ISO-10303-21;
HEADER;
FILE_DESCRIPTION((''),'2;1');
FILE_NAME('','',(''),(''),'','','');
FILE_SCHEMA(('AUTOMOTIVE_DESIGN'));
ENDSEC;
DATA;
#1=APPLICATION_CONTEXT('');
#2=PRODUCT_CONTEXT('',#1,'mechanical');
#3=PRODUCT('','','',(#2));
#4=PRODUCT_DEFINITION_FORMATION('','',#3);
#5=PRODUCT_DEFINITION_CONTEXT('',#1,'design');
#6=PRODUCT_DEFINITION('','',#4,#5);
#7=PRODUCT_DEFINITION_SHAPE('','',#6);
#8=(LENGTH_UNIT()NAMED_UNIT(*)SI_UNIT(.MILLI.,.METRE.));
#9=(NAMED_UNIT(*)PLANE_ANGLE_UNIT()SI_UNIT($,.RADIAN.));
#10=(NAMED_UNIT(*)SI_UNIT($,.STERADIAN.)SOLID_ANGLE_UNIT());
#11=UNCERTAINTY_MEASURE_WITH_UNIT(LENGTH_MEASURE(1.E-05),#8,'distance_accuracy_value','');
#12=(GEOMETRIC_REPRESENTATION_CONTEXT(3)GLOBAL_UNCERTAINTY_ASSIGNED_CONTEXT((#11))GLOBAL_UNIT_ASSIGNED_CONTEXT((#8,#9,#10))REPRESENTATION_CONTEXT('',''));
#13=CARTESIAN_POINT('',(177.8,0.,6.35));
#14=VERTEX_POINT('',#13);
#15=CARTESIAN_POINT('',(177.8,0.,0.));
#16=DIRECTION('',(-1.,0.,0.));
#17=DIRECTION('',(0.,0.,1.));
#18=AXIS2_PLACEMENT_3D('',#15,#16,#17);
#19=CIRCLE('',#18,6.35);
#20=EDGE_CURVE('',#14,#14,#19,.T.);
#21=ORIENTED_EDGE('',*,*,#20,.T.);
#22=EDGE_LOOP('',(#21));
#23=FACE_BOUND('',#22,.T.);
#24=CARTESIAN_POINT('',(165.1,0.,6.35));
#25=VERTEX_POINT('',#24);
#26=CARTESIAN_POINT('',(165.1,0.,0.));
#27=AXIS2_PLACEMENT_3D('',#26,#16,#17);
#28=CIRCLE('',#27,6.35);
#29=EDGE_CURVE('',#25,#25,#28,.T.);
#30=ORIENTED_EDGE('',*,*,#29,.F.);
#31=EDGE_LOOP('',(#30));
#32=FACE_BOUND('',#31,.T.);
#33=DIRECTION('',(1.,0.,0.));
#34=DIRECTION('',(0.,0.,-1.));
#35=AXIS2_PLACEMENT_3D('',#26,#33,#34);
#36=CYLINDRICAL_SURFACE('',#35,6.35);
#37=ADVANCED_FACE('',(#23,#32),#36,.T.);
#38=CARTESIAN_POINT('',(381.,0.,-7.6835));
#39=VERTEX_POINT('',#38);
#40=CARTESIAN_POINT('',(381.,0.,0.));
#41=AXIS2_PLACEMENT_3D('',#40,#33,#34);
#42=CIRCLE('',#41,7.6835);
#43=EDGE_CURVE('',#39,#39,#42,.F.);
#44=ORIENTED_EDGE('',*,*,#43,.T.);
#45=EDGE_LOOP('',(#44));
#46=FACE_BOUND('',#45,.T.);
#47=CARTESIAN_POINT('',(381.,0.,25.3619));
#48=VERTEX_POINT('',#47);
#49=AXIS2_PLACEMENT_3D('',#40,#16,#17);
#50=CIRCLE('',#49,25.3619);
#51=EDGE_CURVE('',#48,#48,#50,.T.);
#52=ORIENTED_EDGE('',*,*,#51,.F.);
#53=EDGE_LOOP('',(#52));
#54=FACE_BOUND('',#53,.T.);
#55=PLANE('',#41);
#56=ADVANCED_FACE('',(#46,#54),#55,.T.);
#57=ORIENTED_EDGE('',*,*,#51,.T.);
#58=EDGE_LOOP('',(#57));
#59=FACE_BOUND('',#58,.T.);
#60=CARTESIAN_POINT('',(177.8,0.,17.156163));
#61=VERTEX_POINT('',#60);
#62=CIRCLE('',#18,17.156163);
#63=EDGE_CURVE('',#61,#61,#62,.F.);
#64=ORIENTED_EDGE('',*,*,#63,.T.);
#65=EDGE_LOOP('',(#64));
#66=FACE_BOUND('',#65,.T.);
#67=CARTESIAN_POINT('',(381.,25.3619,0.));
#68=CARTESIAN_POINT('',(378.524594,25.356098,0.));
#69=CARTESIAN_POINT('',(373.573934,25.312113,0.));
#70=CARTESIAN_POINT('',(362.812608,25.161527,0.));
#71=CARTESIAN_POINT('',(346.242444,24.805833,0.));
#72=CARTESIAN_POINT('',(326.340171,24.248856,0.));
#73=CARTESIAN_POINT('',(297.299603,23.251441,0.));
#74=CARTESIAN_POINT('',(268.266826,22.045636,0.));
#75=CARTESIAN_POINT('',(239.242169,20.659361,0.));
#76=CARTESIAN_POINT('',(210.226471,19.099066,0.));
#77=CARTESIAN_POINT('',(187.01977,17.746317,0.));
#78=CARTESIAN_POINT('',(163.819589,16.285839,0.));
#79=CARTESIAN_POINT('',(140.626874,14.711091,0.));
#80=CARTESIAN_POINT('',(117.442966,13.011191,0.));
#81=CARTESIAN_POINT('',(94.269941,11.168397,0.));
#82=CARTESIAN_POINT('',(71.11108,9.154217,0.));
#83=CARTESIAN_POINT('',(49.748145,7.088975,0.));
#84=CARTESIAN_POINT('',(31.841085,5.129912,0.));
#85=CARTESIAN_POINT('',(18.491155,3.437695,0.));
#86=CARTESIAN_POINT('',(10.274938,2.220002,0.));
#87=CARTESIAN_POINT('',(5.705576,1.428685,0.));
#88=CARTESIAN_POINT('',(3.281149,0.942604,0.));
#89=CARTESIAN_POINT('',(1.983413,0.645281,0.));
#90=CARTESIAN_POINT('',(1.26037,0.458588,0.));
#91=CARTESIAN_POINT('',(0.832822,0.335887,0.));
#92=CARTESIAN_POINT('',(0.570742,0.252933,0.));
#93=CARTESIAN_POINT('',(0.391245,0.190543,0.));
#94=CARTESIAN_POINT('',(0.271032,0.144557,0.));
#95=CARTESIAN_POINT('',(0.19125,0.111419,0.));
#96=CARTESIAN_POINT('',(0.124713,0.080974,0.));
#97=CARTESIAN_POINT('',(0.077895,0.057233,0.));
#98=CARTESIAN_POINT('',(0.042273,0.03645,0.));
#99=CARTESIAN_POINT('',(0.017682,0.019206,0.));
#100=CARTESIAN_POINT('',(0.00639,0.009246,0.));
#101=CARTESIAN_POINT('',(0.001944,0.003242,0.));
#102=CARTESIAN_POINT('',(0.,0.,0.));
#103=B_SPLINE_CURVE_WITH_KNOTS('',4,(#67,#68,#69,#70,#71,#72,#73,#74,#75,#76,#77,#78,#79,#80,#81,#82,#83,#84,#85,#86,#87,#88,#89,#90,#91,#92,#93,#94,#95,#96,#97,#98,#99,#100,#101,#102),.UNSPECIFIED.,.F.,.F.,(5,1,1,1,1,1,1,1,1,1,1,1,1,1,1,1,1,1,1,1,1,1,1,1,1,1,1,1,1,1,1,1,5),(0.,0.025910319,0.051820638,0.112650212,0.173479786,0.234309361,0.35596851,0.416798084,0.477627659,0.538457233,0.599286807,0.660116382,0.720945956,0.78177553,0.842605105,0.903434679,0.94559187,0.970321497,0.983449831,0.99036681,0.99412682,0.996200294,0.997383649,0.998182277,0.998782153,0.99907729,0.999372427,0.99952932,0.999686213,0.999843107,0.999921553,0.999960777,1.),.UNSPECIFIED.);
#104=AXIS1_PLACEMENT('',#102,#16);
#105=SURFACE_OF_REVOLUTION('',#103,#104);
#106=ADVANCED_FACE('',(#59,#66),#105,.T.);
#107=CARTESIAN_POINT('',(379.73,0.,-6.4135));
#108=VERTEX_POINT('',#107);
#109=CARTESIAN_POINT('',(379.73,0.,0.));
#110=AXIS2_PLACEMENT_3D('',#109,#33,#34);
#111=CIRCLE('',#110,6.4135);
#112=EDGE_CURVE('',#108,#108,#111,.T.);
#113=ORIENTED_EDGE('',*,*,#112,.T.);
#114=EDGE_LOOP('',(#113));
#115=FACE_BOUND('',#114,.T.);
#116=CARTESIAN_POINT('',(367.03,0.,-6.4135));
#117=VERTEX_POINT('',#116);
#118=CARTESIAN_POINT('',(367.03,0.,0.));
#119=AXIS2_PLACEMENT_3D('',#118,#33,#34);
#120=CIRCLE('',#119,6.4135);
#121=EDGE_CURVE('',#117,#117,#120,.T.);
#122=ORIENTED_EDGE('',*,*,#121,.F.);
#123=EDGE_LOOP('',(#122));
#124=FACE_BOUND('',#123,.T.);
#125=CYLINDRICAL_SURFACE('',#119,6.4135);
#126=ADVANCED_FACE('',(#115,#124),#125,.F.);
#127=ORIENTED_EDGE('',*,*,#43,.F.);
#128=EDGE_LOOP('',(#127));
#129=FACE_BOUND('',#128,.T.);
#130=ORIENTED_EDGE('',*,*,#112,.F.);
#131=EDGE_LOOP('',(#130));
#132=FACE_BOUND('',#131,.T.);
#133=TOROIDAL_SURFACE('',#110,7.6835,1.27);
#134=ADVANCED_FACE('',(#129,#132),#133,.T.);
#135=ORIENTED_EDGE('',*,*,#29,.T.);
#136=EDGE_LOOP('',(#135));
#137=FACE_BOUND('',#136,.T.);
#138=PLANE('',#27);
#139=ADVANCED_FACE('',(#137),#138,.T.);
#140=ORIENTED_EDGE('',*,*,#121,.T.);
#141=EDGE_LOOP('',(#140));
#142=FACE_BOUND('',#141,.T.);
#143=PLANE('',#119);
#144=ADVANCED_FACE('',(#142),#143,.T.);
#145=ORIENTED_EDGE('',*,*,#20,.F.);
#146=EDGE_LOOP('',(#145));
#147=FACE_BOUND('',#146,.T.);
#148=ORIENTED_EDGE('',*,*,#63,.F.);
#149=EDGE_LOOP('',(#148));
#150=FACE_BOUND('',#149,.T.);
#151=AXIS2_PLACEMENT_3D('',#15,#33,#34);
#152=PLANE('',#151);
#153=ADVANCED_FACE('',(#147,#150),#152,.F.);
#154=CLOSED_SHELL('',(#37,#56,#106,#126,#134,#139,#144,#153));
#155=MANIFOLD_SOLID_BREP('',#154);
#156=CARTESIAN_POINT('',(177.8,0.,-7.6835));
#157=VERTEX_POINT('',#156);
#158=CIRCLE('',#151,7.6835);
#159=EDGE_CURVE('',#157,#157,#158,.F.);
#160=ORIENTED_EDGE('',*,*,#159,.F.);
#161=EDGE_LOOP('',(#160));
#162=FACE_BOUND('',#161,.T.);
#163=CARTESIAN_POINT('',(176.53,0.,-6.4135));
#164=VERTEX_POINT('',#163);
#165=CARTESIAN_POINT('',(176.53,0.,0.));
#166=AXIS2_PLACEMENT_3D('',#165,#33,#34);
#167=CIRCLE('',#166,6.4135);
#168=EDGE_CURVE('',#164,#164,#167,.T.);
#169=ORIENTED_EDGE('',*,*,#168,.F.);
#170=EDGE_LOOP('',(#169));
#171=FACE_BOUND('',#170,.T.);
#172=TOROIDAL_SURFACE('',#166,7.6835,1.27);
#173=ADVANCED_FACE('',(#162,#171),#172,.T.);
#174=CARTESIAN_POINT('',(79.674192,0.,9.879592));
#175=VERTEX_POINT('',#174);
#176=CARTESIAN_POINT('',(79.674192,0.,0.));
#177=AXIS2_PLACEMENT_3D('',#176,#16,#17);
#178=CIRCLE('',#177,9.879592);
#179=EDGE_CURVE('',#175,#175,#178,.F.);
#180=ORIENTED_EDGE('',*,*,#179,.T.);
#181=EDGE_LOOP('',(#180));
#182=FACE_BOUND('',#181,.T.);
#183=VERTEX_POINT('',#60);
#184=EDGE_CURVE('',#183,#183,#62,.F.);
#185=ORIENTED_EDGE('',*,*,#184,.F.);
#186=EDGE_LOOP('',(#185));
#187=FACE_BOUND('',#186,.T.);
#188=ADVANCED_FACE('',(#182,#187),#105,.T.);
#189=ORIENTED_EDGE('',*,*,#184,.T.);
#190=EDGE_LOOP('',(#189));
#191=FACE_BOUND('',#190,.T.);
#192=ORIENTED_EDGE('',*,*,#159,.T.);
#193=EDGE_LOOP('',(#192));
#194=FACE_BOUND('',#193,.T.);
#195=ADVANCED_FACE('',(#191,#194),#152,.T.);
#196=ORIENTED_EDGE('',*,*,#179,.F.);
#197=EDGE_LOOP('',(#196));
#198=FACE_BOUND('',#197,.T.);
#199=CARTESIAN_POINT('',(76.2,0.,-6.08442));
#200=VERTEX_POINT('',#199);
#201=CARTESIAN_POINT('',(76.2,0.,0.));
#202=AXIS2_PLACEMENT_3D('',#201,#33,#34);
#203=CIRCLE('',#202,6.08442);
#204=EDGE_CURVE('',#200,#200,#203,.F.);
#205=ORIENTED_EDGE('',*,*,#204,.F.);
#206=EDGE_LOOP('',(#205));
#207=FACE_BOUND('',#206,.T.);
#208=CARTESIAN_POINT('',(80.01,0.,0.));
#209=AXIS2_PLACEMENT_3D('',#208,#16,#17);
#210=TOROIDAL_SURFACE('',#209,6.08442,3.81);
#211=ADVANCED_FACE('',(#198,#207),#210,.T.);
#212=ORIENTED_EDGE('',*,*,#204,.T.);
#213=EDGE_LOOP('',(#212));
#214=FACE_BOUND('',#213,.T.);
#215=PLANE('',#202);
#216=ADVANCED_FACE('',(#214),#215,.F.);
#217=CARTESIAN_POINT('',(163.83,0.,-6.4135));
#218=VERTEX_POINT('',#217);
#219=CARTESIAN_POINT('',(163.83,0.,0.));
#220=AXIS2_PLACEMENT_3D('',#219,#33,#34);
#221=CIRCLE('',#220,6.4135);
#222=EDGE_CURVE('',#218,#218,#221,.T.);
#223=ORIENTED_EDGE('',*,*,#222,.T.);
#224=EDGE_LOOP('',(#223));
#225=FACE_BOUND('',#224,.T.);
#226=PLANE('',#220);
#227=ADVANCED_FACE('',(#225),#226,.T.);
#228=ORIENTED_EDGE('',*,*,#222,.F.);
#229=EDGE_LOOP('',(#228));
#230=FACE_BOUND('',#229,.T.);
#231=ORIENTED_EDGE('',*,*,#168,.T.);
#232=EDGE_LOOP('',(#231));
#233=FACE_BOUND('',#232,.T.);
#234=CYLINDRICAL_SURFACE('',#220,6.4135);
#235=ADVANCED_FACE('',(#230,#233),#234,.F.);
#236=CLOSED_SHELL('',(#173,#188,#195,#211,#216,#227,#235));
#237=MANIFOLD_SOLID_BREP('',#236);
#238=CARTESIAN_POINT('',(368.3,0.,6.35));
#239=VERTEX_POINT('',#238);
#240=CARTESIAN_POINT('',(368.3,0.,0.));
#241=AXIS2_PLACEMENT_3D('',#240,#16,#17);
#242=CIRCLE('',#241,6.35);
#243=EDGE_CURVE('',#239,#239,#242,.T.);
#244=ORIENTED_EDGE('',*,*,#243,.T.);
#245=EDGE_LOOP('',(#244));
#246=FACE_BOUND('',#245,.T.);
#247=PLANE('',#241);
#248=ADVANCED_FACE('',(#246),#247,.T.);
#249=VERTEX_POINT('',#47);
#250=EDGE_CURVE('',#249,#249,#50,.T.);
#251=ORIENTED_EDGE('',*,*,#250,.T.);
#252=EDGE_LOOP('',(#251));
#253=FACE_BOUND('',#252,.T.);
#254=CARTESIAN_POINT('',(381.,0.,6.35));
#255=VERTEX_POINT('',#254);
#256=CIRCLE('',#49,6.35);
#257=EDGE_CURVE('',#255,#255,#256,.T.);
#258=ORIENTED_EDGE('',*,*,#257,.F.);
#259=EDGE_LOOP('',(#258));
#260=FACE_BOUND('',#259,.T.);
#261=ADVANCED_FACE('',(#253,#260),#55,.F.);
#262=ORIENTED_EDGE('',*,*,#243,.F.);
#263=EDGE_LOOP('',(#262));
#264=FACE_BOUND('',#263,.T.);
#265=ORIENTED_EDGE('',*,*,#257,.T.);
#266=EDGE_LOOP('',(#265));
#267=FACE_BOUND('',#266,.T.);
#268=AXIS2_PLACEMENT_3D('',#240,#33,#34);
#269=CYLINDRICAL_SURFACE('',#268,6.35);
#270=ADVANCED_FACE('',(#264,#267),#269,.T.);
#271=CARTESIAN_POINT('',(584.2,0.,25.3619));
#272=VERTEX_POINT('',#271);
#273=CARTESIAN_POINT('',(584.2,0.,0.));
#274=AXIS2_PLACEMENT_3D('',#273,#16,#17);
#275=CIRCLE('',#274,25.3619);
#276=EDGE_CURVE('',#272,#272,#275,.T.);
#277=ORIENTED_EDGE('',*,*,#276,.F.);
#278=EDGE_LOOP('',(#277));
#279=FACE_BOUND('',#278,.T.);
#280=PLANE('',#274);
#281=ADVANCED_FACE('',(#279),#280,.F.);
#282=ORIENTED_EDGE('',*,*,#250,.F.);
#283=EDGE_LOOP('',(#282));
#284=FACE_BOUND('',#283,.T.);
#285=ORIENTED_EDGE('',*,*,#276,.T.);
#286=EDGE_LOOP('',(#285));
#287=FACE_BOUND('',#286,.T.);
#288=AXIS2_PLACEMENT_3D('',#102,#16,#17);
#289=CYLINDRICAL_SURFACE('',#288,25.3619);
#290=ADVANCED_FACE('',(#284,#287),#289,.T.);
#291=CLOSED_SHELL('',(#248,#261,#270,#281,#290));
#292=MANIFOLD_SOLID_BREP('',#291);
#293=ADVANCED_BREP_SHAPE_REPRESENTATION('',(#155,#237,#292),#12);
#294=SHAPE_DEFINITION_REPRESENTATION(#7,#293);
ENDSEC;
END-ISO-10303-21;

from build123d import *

# Parameters (mm, degrees)
FILLET1_R           = 3.81
SPLIT2_START        = 76.2
SPLIT2_2_OUTLINE_W  = 54
SPLIT2_2_OUTLINE_H  = 54
SPLIT2_2_DEPTH      = 304.8
SKETCH2_R           = 6.35
BOSS_EXTRUDE1_DEPTH = 12.7
SKETCH3_R           = 6.4135
CUT_EXTRUDE1_DEPTH  = 13.97
FILLET2_R           = 1.27
SKETCH4_R           = 6.35
BOSS_EXTRUDE2_DEPTH = 12.7
SKETCH5_R           = 6.4135
CUT_EXTRUDE2_DEPTH  = 13.97
FILLET3_R           = 1.27


# Read off the part's stored shape, not the designer's step: Split2
with BuildPart() as part:
    # Sketch1 → Revolve1 (revolve)
    with BuildSketch(Plane.XY, mode=Mode.PRIVATE) as revolve1_sk:
        with BuildLine():
            Line((381, 25.3619), (584.2, 25.3619))
            Line((584.2, 25.3619), (584.2, 0))
            Line((584.2, 0), (0, 0))
            add(Edge.make_bspline(
                [(0, 0), (0.001943702, 0.003241862), (0.006389673, 0.009245617), (0.017681717, 0.019205878), (0.042272918, 0.036450053), (0.077894833, 0.057232573), (0.124712659, 0.080973851), (0.191250301, 0.111419343), (0.271031854, 0.144556968), (0.391244533, 0.190542862), (0.570742032, 0.252932933), (0.832821896, 0.335886963), (1.260370277, 0.458588114), (1.983412651, 0.645281043), (3.281149014, 0.942604321), (5.70557572, 1.428684819), (10.274937833, 2.220001642), (18.491155359, 3.437695386), (31.841085113, 5.129912275), (49.748145394, 7.088974906), (71.111079528, 9.154217125), (94.269940572, 11.168396588), (117.44296568, 13.011191187), (140.626874096, 14.711091291), (163.819588974, 16.285839147), (187.019770429, 17.746317083), (210.226471113, 19.099066483), (239.242169499, 20.659360719), (268.266826454, 22.045635859), (297.299602619, 23.251440617), (326.340171249, 24.24885616), (346.242443602, 24.805833209), (362.812607625, 25.161527082), (373.573934486, 25.312112889), (378.524593559, 25.356098005), (381, 25.3619)],
                knots=[0, 0, 0, 0, 0, 3.9223e-05, 7.8447e-05, 0.000156893, 0.000313787, 0.00047068, 0.000627573, 0.00092271, 0.001217847, 0.001817723, 0.002616351, 0.003799706, 0.00587318, 0.00963319, 0.016550169, 0.029678503, 0.05440813, 0.096565321, 0.157394895, 0.21822447, 0.279054044, 0.339883618, 0.400713193, 0.461542767, 0.522372341, 0.583201916, 0.64403149, 0.765690639, 0.826520214, 0.887349788, 0.948179362, 0.974089681, 1, 1, 1, 1, 1], degree=4))
        make_face()
    revolve(revolve1_sk.sketch.rotate(Axis((0, 0, 0), (1, 0, 0)), 90), axis=Axis((0, 0, 0), (1, 0, 0)))

    # Split1
    split(bisect_by=Plane(origin=(76.2, 0, 0), x_dir=(0, 0, 1), z_dir=(1, 0, 0)), keep=Keep.TOP)

    # Fillet1
    fillet1_edges = [part.edges().sort_by_distance(p)[0] for p in [
        (76.2, -1e-09, -9.569835462),
    ]]
    fillet(fillet1_edges, radius=FILLET1_R)

    # Split2 2 outline → Split2 2 (cut)
    with BuildSketch(Plane.YZ.offset(SPLIT2_START)):
        Rectangle(SPLIT2_2_OUTLINE_W, SPLIT2_2_OUTLINE_H)
    extrude(amount=SPLIT2_2_DEPTH, mode=Mode.SUBTRACT)

    # Sketch2 → Boss-Extrude1 (add)
    with BuildSketch(Plane.ZY.offset(-381)):
        Circle(SKETCH2_R)
    extrude(amount=BOSS_EXTRUDE1_DEPTH)


with BuildPart() as body_2:
    # Split2 outline → Split2 (revolve)
    with BuildSketch(Plane.YX):
        with BuildLine():
            Line((0, 177.8), (0, 76.2))
            Line((0, 76.2), (6.084420139, 76.2))
            ThreePointArc((6.084420139, 76.2), (8.657032806, 77.199703919), (9.879592473, 79.674192093))
            add(Edge.make_bspline(
                [(17.156163156, 177.8), (17.118974817, 177.205056497), (16.718192411, 170.809994021), (15.932533919, 158.616148073), (14.711091291, 140.626874096), (13.011191187, 117.44296568), (11.569057582, 99.30822714), (10.522806902, 86.972101563), (9.946344013, 80.42859243), (9.879592473, 79.674192093)],
                knots=[0.532217748, 0.532217748, 0.532217748, 0.532217748, 0.532217748, 0.538457233, 0.599286807, 0.660116382, 0.720945956, 0.78177553, 0.789702762, 0.789702762, 0.789702762, 0.789702762, 0.789702762], degree=4))
            Line((17.156163156, 177.8), (0, 177.8))
        make_face()
    revolve(axis=Axis((0, 0, 0), (1, 0, 0)))

    # Sketch5 → Cut-Extrude2 (cut)
    with BuildSketch(Plane(origin=(177.8, 0, 0), x_dir=(0, 0, -1), z_dir=(1, 0, 0))):
        Circle(SKETCH5_R)
    extrude(amount=-CUT_EXTRUDE2_DEPTH, mode=Mode.SUBTRACT)

    # Fillet3
    fillet3_edges = [body_2.edges().sort_by_distance(p)[0] for p in [
        (177.8, 0, 6.4135),
    ]]
    fillet(fillet3_edges, radius=FILLET3_R)


with BuildPart() as body_3:
    # Split2 3 outline → Split2 3 (revolve)
    with BuildSketch(Plane.YX):
        with BuildLine():
            Line((0, 381), (0, 177.8))
            Line((0, 177.8), (17.156163156, 177.8))
            add(Edge.make_bspline(
                [(25.3619, 381), (25.356098005, 378.524593559), (25.312112889, 373.573934486), (25.161527082, 362.812607625), (24.805833209, 346.242443602), (24.24885616, 326.340171249), (23.251440617, 297.299602619), (22.045635859, 268.266826454), (20.659360719, 239.242169499), (19.131075362, 210.821717791), (18.153790723, 194.011643645), (17.481528925, 183.005240471), (17.156163156, 177.8)],
                knots=[0, 0, 0, 0, 0, 0.025910319, 0.051820638, 0.112650212, 0.173479786, 0.234309361, 0.35596851, 0.416798084, 0.477627659, 0.532217748, 0.532217748, 0.532217748, 0.532217748, 0.532217748], degree=4))
            Line((25.3619, 381), (0, 381))
        make_face()
    revolve(axis=Axis((0, 0, 0), (1, 0, 0)))

    # Sketch3 → Cut-Extrude1 (cut)
    with BuildSketch(Plane(origin=(381, 0, 0), x_dir=(0, 0, -1), z_dir=(1, 0, 0))):
        Circle(SKETCH3_R)
    extrude(amount=-CUT_EXTRUDE1_DEPTH, mode=Mode.SUBTRACT)

    # Fillet2
    fillet2_edges = [body_3.edges().sort_by_distance(p)[0] for p in [
        (381, 0, 6.4135),
    ]]
    fillet(fillet2_edges, radius=FILLET2_R)

    # Sketch4 → Boss-Extrude2 (add)
    with BuildSketch(Plane.ZY.offset(-177.8)):
        Circle(SKETCH4_R)
    extrude(amount=BOSS_EXTRUDE2_DEPTH)


solid = Compound([part.part, body_2.part, body_3.part])
